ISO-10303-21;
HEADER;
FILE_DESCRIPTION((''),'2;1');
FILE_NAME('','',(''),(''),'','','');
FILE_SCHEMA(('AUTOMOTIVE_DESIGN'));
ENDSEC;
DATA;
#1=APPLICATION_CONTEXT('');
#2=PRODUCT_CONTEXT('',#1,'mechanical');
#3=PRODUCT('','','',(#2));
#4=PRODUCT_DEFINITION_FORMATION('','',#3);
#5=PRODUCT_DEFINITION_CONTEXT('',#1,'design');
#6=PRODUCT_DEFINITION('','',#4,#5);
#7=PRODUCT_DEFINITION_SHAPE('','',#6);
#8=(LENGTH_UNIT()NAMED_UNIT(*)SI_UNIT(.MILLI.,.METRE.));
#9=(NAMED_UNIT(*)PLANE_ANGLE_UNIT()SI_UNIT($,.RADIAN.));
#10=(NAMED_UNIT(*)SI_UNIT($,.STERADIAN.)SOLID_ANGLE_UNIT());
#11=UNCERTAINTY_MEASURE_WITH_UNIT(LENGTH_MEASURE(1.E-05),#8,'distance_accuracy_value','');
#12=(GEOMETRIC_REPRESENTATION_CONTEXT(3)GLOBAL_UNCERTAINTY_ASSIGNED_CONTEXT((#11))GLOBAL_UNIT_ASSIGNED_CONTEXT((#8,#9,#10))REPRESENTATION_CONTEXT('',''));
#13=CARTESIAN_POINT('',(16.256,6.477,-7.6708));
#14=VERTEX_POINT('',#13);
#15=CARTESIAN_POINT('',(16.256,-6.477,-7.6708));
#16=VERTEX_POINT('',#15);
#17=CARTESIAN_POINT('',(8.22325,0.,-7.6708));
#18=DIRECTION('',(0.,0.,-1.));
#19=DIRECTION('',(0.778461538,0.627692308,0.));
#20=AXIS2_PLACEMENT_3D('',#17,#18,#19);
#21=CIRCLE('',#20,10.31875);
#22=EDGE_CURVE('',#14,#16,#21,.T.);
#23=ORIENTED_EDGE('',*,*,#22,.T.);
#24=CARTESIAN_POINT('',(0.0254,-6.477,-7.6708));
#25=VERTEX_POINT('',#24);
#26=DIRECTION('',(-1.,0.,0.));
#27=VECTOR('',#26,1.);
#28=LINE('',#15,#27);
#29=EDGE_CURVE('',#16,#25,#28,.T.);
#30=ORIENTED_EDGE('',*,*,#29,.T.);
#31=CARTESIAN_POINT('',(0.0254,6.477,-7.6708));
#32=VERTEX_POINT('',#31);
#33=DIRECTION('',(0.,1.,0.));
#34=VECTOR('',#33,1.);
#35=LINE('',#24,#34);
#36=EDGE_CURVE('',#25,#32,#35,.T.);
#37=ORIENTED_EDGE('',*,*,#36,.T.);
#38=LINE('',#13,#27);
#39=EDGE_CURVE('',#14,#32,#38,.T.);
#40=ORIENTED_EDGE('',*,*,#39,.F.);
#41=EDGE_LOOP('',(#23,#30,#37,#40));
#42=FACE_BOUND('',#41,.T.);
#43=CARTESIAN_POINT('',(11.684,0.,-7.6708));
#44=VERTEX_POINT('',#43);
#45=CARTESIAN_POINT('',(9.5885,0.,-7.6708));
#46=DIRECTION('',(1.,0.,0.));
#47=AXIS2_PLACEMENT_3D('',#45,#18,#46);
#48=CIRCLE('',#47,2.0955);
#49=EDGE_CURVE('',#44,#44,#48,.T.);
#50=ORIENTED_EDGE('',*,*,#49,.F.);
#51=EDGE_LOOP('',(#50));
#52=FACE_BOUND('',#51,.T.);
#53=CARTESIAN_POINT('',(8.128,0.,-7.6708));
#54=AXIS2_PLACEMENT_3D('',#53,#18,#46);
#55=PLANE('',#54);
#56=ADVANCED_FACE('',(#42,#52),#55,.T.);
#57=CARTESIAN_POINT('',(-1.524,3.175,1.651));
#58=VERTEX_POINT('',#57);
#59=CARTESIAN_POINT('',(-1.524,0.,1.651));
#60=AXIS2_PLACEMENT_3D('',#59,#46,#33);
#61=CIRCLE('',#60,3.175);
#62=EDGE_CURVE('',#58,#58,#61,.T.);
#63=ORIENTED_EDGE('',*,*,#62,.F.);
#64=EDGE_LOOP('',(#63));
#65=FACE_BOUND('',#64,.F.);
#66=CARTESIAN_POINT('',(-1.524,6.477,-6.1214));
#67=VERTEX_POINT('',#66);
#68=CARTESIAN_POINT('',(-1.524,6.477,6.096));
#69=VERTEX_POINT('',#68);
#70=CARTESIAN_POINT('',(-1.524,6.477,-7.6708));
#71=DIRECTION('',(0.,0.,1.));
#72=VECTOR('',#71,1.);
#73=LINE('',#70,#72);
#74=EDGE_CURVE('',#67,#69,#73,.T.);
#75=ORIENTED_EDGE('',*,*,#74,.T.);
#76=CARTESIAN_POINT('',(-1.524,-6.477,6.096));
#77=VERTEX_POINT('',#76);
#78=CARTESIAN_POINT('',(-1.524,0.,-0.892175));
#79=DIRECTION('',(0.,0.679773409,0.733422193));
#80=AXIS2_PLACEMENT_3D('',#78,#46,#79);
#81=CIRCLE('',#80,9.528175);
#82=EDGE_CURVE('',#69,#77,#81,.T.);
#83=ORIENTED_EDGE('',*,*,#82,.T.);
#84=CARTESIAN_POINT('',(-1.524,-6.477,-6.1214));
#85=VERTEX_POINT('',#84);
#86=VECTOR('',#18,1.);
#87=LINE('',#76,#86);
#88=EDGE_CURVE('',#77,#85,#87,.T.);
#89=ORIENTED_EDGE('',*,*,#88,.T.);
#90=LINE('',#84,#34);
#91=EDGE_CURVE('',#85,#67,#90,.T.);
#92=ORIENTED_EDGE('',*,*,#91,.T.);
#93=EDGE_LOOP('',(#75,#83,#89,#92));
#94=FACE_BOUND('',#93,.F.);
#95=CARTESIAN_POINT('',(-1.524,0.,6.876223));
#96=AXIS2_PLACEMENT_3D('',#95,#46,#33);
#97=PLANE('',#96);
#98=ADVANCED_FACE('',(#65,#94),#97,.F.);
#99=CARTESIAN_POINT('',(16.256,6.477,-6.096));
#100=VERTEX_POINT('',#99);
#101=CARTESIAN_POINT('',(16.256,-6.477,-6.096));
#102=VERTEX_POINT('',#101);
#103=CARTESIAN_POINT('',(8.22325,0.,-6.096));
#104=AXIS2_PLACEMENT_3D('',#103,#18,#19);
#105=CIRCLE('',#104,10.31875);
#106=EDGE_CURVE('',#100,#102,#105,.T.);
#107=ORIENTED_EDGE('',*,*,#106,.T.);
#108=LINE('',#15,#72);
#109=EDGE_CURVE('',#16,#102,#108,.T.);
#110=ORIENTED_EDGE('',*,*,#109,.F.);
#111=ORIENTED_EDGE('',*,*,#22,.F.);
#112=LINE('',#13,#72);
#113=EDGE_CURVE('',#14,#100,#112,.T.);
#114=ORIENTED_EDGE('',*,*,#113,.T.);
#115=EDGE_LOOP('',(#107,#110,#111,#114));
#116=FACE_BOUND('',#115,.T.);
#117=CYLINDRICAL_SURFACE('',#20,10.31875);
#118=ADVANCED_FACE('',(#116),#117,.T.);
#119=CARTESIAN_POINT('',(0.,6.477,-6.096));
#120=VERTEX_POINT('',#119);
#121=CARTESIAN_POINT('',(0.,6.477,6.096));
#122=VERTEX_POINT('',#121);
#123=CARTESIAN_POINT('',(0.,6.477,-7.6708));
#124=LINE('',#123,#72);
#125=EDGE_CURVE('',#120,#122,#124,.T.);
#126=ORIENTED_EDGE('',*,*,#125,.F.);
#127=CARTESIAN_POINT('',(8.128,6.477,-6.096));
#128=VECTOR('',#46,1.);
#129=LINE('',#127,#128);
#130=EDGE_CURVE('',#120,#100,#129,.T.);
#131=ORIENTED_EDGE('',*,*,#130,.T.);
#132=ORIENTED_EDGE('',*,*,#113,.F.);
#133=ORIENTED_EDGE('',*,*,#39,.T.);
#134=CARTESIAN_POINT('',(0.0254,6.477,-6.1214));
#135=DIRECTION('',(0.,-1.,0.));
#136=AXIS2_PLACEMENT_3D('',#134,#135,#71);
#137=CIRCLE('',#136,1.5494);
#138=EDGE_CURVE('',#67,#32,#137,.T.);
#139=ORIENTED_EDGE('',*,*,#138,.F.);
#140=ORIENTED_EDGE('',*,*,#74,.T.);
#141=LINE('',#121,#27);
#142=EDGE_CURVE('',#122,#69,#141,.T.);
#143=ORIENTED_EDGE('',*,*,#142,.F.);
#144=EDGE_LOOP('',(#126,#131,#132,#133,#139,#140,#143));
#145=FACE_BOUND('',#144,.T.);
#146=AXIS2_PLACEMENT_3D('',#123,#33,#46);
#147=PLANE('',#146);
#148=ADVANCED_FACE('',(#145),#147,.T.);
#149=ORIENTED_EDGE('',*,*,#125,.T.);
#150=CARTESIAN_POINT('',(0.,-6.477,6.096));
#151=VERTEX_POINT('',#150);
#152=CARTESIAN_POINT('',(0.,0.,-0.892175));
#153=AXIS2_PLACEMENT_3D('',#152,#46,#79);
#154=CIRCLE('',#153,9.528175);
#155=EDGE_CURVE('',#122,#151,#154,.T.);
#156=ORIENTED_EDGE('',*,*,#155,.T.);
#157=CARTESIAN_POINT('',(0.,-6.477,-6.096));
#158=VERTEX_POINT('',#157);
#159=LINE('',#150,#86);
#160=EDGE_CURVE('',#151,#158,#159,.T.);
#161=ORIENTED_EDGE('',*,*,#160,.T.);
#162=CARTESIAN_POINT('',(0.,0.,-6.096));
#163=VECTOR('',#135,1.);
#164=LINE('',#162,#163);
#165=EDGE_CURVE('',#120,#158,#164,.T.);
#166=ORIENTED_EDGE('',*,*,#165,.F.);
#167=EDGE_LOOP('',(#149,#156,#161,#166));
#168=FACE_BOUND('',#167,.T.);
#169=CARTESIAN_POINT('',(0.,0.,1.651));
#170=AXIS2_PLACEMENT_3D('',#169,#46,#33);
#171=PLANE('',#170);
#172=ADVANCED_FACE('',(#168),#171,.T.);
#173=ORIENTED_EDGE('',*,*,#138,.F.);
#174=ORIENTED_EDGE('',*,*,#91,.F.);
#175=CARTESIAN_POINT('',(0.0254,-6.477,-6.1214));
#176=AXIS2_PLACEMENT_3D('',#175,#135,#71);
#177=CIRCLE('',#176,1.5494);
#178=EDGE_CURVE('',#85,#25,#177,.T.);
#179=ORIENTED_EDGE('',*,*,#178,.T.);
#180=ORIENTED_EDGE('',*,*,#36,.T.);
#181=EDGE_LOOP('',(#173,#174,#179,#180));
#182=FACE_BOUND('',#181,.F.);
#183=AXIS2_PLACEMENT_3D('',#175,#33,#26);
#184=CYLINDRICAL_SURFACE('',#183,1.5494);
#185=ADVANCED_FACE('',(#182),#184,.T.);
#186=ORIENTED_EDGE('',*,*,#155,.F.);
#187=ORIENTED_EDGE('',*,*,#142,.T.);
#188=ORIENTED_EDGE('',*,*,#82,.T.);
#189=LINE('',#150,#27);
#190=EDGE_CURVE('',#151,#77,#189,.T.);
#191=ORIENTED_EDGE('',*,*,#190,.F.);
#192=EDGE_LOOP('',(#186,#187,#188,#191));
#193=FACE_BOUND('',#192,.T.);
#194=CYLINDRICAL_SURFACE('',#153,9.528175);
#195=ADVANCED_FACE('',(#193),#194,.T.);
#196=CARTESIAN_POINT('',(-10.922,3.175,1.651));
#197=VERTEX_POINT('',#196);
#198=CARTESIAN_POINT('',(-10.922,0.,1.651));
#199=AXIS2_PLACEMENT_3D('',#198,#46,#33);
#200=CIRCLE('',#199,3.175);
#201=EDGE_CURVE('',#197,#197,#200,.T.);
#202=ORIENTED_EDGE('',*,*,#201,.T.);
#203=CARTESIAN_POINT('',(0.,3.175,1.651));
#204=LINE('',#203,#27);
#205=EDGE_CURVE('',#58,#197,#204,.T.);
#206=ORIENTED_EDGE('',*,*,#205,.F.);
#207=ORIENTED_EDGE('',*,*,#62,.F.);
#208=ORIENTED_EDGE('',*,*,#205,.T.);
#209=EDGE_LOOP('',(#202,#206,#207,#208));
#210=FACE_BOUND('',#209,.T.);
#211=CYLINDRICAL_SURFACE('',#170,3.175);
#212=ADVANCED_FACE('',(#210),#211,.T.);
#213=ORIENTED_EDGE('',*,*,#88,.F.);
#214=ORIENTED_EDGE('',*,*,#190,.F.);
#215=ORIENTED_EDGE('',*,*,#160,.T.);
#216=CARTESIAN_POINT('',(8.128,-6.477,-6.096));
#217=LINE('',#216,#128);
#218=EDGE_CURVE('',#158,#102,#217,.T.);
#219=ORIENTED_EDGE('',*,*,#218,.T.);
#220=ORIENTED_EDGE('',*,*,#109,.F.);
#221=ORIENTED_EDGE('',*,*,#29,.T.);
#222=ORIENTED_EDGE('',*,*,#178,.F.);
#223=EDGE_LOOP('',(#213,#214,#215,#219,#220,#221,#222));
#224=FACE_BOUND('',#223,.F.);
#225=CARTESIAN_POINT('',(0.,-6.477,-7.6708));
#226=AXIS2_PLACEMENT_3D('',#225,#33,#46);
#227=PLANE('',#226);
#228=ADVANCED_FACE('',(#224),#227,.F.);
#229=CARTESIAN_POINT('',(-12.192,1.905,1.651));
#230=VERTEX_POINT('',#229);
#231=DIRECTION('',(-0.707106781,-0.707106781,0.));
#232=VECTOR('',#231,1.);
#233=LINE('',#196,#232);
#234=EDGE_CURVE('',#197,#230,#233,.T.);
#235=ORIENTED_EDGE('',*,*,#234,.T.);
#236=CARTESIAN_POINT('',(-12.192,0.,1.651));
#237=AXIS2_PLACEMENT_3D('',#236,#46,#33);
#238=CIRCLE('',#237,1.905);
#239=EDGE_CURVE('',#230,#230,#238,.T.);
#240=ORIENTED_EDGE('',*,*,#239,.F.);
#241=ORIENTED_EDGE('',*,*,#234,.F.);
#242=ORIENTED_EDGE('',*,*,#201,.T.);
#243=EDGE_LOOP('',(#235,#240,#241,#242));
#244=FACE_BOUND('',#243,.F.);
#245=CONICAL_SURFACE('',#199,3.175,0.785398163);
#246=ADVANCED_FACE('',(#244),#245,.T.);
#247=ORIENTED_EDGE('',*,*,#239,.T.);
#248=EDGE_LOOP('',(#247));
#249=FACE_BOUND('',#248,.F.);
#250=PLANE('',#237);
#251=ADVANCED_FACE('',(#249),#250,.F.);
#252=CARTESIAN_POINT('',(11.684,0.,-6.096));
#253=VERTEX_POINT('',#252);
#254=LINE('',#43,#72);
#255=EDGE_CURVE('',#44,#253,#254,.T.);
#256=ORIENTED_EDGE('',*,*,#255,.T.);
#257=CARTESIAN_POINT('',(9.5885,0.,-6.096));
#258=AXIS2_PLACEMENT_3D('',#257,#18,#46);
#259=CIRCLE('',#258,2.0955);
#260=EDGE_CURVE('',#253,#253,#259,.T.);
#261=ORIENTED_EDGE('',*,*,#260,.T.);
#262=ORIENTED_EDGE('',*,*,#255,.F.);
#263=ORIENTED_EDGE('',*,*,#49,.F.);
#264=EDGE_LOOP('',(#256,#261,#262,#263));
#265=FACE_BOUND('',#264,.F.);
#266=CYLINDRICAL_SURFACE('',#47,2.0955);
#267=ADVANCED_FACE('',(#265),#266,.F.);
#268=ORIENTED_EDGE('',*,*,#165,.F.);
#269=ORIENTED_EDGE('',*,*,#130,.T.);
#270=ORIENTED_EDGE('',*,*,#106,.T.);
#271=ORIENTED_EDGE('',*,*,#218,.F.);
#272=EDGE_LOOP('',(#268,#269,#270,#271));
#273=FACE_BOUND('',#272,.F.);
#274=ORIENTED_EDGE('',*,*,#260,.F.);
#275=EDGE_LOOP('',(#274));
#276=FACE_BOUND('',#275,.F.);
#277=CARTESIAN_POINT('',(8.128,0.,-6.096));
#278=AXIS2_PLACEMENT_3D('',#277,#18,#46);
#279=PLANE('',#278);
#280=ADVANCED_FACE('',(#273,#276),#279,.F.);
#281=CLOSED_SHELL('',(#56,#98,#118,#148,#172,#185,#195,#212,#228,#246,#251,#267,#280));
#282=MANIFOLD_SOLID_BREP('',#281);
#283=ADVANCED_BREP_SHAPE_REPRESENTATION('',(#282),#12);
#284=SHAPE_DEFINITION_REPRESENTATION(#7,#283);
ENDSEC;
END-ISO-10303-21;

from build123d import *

# Parameters (mm, degrees)
F0_W     = 12.954
F0_H     = 12.192
F0_R     = 3.175
F0_H_2   = 1.5748
F1_DEPTH = 1.524
F2_DEPTH = 12.192
F3_SIZE  = 1.27
F5_W     = 16.256
F5_H     = 12.954
F5_R     = 2.0955
F6_DEPTH = 1.5748
F7_R     = 1.5494


# Not quite as in the source:
# - a feature names something its author has since deleted; it is built from what else it names


with BuildPart() as f1:
    # F0 (on Right) → F1 (new body)
    with BuildSketch(Plane.YZ):
        with BuildLine():
            ThreePointArc((6.477, 6.096), (0, 8.636), (-6.477, 6.096))
            Line((-6.477, 6.096), (6.477, 6.096))
        make_face()
        Rectangle(F0_W, F0_H)
        with Locations((0, 1.651)):
            Circle(F0_R, mode=Mode.SUBTRACT)
        with Locations((0, -6.8834)):
            Rectangle(F0_W, F0_H_2)
        with Locations((0, 1.651)):
            Circle(F0_R)
    extrude(amount=-F1_DEPTH)

    # F0 (on Right) → F2 (join)
    with BuildSketch(Plane.YZ):
        with Locations((0, 1.651)):
            Circle(F0_R)
    extrude(amount=-F2_DEPTH)

    # F3
    f3_edges = [f1.edges().sort_by_distance(p)[0] for p in [
        (-12.192, -3.175, 1.651),
    ]]
    chamfer(f3_edges, length=F3_SIZE)

    # F5 (on offset) → F6 (join)
    with BuildSketch(Plane(origin=(0, 0, -7.6708), x_dir=(1, 0, 0), z_dir=(0, 0, -1))):
        with Locations((8.128, 0)):
            Rectangle(F5_W, F5_H)
        with Locations((9.5885, 0)):
            Circle(F5_R, mode=Mode.SUBTRACT)
        with BuildLine():
            Line((16.256, 6.477), (16.256, -6.477))
            ThreePointArc((16.256, -6.477), (18.542, 0), (16.256, 6.477))
        make_face()
    extrude(amount=-F6_DEPTH)

    # F7
    f7_edges = [f1.edges().sort_by_distance(p)[0] for p in [
        (-1.524, 0, -7.6708),
    ]]
    fillet(f7_edges, radius=F7_R)


solid = f1.part
